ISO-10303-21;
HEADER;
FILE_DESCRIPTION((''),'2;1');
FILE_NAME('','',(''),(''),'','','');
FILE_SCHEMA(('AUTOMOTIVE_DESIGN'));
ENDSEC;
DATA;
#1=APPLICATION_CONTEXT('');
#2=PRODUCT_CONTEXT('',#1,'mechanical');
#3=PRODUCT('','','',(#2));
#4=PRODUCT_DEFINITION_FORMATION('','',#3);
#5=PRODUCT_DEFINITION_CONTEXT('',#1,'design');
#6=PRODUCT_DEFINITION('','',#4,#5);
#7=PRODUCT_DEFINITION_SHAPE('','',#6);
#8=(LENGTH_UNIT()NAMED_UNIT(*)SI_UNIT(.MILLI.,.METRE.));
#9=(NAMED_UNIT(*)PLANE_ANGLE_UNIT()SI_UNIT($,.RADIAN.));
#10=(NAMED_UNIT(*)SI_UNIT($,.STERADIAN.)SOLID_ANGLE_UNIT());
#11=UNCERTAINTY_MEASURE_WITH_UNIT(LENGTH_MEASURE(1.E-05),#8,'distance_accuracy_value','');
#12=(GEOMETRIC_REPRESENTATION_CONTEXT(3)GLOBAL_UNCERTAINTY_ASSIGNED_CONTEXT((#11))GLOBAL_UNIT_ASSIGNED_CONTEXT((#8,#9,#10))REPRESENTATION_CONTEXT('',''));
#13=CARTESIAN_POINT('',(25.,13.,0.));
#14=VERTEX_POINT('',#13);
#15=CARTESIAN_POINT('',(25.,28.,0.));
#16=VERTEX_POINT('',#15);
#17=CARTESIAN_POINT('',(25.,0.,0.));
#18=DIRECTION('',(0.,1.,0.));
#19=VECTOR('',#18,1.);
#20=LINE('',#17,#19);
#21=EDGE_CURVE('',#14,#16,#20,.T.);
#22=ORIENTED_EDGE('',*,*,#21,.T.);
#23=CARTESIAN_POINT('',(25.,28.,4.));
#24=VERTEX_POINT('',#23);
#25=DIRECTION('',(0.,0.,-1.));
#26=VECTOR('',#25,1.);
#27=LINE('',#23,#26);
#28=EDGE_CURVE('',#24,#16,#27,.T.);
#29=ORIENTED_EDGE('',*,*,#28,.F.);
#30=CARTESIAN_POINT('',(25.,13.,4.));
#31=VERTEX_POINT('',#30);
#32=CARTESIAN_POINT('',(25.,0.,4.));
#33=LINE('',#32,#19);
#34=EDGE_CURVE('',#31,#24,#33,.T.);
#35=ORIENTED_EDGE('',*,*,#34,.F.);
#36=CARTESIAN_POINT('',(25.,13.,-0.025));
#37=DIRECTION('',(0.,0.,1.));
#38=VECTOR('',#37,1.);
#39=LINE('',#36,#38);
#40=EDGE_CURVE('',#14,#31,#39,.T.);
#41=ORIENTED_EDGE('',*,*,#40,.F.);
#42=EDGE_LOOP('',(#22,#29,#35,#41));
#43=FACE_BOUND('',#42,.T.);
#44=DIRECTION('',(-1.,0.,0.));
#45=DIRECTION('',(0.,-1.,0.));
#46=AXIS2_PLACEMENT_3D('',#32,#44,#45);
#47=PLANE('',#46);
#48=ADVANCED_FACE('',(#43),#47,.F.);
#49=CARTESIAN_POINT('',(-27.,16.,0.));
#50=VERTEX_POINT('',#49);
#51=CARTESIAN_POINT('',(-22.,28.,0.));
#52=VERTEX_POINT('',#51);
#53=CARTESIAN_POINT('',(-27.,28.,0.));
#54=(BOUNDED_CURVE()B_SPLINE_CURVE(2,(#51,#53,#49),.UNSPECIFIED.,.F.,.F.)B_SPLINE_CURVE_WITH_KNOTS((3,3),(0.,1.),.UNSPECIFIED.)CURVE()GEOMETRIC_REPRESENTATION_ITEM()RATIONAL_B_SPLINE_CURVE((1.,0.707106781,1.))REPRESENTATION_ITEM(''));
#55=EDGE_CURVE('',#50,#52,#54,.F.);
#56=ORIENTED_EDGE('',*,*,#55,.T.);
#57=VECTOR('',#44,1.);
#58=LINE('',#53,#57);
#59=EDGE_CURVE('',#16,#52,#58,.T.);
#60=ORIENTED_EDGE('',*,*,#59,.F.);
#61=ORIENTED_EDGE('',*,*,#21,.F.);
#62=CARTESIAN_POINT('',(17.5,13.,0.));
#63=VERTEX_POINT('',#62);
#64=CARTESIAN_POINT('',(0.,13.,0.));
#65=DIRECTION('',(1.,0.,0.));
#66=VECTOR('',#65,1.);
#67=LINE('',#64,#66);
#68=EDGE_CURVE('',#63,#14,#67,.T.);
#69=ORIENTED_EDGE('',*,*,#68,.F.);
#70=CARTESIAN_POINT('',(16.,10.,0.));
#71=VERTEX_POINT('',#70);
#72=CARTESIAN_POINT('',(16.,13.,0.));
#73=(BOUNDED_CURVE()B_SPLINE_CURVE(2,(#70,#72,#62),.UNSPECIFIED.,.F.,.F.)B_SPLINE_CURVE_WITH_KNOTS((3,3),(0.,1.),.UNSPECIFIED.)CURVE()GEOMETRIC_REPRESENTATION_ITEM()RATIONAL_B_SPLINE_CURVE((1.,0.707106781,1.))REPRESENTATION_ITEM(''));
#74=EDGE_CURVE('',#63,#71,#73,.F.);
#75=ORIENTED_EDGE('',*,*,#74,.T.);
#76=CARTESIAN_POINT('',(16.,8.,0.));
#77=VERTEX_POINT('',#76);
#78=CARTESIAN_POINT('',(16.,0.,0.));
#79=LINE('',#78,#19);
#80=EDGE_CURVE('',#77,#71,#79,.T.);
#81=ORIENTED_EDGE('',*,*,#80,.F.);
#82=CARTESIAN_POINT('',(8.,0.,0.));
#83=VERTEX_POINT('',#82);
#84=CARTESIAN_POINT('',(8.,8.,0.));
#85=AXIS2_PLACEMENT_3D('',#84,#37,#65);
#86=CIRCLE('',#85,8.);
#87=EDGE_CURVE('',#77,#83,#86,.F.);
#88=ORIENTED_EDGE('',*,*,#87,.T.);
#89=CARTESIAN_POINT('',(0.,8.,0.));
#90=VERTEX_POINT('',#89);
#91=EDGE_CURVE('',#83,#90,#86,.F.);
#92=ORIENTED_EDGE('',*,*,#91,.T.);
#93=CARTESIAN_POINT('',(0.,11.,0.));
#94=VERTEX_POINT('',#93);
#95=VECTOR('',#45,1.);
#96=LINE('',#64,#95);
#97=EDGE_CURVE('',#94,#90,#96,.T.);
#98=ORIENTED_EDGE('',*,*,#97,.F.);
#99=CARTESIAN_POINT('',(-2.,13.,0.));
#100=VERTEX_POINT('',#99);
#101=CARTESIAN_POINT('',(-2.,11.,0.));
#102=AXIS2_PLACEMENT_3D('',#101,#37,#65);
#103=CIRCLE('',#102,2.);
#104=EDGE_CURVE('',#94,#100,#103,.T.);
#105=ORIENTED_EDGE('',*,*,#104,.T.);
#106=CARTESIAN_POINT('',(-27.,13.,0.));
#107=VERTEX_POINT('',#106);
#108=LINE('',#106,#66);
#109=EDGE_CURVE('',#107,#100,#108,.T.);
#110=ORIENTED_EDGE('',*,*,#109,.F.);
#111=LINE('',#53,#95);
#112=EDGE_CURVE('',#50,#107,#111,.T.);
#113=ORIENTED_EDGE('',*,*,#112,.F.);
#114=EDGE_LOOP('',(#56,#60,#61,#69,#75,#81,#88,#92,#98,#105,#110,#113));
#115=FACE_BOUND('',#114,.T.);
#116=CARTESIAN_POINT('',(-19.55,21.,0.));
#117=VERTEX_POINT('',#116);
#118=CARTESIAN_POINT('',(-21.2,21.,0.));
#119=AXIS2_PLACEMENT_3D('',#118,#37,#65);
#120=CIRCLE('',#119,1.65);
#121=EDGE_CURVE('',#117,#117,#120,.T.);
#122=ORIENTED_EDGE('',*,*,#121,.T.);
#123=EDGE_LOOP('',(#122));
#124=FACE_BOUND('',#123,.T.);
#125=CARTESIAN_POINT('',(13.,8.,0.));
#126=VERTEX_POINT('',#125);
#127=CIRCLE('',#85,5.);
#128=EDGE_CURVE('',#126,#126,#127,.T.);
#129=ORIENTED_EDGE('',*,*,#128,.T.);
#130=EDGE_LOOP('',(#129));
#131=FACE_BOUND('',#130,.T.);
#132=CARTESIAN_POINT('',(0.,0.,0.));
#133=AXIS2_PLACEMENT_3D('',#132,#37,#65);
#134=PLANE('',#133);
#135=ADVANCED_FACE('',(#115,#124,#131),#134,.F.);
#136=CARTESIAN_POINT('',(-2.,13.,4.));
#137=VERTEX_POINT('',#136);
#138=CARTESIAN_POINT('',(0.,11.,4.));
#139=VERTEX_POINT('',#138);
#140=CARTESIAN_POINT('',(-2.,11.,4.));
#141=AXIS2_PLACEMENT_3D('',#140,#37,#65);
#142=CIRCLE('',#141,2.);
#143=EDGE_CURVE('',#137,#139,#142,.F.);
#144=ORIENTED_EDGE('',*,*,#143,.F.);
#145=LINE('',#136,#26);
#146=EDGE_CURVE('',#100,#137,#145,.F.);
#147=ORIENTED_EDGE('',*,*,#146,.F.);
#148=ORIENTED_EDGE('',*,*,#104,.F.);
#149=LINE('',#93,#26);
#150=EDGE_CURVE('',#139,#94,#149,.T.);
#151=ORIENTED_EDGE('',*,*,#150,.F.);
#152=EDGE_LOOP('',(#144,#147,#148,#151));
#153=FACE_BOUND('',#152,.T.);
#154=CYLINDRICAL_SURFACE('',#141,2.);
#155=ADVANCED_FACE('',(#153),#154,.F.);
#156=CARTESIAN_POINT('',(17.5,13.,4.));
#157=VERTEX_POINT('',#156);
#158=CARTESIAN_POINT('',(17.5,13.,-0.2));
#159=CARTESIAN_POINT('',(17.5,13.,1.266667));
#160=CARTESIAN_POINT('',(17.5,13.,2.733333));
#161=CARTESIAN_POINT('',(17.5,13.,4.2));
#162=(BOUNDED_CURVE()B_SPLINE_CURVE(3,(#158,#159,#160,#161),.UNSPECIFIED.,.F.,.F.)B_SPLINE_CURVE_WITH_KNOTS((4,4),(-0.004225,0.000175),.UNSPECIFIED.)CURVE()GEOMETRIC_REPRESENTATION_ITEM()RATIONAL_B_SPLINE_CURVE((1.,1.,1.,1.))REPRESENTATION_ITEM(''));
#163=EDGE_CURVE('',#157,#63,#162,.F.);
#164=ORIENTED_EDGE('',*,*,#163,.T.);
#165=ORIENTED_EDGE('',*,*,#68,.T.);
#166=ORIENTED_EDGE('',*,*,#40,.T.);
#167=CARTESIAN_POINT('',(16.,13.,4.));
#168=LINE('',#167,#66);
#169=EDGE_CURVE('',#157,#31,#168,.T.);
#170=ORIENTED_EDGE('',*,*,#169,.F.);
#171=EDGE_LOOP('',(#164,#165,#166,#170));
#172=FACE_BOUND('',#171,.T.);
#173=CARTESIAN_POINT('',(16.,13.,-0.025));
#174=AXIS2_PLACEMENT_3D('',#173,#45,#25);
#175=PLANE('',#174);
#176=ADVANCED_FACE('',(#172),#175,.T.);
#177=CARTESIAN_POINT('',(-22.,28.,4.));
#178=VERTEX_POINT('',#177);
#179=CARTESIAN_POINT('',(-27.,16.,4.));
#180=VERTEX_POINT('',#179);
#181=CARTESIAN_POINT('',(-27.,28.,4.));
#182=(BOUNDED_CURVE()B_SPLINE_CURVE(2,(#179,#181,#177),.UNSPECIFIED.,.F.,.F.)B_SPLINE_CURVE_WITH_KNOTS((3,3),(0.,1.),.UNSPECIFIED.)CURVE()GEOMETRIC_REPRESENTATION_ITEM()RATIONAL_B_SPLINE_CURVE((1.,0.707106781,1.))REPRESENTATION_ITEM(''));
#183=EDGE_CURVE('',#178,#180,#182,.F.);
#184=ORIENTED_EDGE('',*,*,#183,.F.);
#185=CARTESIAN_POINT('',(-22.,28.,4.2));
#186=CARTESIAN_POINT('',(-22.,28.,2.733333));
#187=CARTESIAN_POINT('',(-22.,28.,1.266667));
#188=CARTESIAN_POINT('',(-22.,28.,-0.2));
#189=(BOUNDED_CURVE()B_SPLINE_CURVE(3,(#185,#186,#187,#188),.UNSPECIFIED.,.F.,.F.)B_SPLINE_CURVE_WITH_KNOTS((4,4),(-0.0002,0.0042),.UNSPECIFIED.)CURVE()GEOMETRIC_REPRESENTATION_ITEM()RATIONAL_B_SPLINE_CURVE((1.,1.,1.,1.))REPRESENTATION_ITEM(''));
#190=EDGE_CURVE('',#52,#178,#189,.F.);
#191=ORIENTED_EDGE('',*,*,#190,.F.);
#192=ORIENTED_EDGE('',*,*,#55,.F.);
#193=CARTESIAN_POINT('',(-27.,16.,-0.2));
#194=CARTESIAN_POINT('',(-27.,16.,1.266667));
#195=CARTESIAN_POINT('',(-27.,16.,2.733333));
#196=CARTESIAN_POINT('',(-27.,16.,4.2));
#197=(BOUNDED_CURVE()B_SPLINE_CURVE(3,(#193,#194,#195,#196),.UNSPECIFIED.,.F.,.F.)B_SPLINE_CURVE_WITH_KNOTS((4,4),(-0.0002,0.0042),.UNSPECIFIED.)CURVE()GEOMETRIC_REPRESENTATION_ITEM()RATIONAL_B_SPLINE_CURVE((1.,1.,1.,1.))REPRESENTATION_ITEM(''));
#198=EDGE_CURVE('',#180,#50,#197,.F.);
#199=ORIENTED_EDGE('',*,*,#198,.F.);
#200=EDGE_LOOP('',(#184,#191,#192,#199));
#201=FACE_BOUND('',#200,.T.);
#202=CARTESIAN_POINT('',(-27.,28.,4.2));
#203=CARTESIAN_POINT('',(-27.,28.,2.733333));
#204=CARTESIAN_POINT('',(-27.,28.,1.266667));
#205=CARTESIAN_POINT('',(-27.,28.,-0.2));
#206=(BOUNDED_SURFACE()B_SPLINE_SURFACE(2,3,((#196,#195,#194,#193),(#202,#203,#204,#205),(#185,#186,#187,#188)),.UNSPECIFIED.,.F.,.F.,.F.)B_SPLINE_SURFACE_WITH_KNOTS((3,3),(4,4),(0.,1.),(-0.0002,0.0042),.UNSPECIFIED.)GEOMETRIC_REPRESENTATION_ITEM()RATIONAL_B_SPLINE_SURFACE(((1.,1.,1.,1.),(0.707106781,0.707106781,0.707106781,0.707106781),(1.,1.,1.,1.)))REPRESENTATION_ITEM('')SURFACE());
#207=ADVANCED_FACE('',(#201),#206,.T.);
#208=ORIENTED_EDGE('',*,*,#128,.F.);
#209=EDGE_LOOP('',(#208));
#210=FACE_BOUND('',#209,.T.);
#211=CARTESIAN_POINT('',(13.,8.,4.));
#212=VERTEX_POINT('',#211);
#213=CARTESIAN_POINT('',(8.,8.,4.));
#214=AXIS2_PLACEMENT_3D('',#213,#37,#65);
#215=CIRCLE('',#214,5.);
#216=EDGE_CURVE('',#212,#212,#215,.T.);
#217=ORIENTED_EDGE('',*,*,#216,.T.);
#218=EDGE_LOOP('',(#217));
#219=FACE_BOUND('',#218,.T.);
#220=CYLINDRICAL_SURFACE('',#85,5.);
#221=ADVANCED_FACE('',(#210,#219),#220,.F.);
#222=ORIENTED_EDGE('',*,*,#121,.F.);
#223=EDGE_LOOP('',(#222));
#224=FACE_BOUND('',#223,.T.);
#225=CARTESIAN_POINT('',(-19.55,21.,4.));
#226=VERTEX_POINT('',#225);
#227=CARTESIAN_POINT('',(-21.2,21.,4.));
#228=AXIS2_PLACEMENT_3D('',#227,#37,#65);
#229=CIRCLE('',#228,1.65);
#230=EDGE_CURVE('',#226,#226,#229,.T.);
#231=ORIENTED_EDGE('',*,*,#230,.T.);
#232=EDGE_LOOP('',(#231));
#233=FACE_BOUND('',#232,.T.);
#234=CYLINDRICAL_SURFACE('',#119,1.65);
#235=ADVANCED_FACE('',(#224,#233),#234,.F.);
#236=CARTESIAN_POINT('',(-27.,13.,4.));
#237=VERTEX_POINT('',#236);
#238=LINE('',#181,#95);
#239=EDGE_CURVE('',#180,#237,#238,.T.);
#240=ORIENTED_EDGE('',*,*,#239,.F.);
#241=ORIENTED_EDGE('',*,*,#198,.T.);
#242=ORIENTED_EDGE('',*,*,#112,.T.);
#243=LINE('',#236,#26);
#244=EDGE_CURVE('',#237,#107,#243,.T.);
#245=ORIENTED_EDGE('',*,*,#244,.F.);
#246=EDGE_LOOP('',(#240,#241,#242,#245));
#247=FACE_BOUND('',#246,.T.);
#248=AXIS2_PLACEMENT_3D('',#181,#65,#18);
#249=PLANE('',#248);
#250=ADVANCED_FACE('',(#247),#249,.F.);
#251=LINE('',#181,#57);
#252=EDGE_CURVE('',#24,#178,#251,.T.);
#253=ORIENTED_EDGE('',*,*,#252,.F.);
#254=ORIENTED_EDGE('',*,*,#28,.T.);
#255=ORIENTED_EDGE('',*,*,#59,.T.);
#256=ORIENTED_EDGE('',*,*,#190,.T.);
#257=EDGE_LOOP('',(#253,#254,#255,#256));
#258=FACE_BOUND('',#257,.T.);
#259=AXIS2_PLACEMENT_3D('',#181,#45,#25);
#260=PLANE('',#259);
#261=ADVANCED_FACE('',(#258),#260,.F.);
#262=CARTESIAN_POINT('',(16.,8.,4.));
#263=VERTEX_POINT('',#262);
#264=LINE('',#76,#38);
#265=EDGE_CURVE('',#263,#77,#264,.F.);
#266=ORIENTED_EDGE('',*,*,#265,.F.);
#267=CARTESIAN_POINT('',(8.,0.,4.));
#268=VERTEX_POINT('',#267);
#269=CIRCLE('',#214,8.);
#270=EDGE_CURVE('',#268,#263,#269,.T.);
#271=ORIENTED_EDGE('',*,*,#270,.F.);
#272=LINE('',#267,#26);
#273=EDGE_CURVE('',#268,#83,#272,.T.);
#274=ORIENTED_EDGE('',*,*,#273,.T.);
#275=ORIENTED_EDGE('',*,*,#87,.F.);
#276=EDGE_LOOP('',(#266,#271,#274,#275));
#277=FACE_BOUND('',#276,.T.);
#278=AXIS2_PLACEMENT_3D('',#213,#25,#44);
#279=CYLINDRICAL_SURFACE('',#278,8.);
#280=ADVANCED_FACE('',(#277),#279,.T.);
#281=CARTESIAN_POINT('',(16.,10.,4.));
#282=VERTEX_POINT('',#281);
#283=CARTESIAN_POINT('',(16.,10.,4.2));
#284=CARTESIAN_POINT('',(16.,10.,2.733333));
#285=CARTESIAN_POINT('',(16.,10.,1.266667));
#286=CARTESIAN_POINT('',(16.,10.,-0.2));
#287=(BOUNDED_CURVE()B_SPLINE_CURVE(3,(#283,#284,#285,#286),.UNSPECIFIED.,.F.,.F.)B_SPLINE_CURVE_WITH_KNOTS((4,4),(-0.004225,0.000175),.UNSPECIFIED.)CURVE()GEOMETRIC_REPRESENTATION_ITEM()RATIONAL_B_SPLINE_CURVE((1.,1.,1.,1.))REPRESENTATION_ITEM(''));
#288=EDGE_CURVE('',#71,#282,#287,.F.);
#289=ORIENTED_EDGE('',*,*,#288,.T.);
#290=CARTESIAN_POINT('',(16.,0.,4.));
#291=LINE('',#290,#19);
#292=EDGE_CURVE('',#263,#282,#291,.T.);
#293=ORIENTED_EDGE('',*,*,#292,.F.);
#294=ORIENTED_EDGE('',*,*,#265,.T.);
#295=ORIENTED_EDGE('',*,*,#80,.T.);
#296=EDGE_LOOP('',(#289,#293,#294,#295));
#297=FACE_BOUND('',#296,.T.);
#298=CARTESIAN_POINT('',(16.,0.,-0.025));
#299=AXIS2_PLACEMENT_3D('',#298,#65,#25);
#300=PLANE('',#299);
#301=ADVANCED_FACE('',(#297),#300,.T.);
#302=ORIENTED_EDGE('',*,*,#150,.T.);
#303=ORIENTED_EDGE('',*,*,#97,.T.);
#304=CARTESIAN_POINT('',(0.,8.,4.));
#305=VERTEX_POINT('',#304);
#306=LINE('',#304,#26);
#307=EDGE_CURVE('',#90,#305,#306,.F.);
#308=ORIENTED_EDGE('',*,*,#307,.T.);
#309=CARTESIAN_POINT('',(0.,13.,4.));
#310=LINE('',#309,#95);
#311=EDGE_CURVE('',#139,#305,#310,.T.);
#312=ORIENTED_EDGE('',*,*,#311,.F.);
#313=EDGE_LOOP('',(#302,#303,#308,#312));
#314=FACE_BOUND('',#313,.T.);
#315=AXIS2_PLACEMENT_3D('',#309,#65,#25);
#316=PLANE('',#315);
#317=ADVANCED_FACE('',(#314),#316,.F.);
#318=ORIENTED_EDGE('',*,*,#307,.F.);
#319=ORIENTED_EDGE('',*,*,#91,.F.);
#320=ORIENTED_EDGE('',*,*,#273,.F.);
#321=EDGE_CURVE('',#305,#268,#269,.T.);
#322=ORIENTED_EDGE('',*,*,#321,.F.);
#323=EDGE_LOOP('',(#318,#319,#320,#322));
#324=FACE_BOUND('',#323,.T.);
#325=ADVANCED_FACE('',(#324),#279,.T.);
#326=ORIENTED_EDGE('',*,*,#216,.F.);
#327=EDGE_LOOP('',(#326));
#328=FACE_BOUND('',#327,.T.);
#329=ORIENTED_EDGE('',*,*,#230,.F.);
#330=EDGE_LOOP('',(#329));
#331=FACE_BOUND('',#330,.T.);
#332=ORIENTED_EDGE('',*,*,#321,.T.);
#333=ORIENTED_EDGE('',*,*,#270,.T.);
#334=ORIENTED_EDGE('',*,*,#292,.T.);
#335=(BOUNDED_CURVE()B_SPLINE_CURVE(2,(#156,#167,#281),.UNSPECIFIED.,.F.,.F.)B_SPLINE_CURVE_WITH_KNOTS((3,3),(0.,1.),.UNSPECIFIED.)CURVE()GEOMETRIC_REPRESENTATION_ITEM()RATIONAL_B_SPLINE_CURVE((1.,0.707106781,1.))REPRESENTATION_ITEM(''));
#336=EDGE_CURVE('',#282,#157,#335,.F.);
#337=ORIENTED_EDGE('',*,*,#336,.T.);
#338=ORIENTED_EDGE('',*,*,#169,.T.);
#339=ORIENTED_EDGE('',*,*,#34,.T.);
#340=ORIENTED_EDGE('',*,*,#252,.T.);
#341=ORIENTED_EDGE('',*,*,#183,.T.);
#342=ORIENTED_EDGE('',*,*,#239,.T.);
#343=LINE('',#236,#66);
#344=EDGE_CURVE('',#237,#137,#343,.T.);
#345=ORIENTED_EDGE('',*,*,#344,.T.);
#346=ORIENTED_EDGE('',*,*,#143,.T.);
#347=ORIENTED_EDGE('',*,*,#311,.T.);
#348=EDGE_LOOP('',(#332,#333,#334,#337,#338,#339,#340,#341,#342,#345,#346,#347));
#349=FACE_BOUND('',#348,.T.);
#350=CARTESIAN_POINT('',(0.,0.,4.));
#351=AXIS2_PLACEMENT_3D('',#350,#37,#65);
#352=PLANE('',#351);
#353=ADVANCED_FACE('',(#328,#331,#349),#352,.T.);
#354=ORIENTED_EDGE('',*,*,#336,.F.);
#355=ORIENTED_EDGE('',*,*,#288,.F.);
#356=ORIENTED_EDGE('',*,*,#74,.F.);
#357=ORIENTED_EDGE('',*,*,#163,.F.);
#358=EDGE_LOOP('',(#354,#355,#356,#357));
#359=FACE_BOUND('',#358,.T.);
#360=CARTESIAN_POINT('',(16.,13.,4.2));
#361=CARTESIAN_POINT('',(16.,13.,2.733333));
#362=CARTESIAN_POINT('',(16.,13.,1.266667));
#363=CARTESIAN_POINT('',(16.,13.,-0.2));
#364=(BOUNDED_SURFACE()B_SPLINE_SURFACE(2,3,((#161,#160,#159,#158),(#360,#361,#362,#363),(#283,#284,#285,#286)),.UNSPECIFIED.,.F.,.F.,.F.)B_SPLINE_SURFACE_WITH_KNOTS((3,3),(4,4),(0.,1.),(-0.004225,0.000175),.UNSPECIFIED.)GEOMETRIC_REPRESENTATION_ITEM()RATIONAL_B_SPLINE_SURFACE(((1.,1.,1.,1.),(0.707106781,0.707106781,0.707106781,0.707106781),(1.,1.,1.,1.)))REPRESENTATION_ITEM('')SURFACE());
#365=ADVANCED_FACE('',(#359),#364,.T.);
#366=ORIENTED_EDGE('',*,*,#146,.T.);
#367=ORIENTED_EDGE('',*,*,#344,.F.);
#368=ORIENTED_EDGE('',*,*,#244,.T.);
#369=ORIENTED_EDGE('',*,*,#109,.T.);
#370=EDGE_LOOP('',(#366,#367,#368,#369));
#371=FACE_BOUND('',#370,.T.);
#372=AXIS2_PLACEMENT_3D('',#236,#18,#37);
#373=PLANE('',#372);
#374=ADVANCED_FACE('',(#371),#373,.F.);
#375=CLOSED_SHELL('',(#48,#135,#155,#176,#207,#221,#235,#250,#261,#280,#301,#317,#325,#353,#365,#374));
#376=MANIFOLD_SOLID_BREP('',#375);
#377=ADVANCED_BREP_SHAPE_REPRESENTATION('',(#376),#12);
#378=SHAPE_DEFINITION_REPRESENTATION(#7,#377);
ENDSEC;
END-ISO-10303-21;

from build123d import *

# Parameters (mm, degrees)
RESSALTO_EXTRUS_O1_DEPTH = 4
FILETE3_R                = 8
ESBO_O2_R                = 1.65
ESBO_O2_R_2              = 5
CORTE_EXTRUS_O1_DEPTH    = 40.102429592
FILETE12_SIZE            = 5
FILETE12_SIZE_2          = 12
FILETE14_R               = 2
ESBO_O3_W                = 9
ESBO_O3_H                = 13
CORTE_EXTRUS_O2_DEPTH    = 40.102429743
FILETE15_R               = 8
FILETE16_SIZE            = 3
FILETE16_SIZE_2          = 1.5


# Some blends are built 0.0001 mm under size
with BuildPart() as part:
    # Esboço1 → Ressalto-extrusão1 (new body)
    with BuildSketch(Plane.XY):
        Polygon((0, 0), (25, 0), (25, 28), (-27, 28), (-27, 13), (0, 13), align=None)
    extrude(amount=RESSALTO_EXTRUS_O1_DEPTH)

    # Filete3
    filete3_edges = [part.edges().sort_by_distance(p)[0] for p in [
        (0, 0, 2),
    ]]
    fillet(filete3_edges, radius=FILETE3_R)

    # Esboço2 → Corte-extrusão1 (cut, through all)
    with BuildSketch(Plane.XY.offset(4)):
        with Locations((-21.2, 21)):
            Circle(ESBO_O2_R)
        with Locations((8, 8)):
            Circle(ESBO_O2_R_2)
    extrude(amount=-CORTE_EXTRUS_O1_DEPTH, mode=Mode.SUBTRACT)

    # Filete12
    # an asymmetric fillet: 12, 5 mm, written as the material it takes off along each edge
    with BuildSketch(Plane(origin=(-27, 28, -30), x_dir=(1, 0, 0), z_dir=(0, 0, 1))) as filete12_piece_1:
        with BuildLine():
            Bezier((FILETE12_SIZE, 0), (0, 0), (0, -FILETE12_SIZE_2), weights=[1, 0.707106781, 1])
            Line((0, -FILETE12_SIZE_2), (0, 0))
            Line((0, 0), (FILETE12_SIZE, 0))
        make_face()
    extrude(amount=64, mode=Mode.SUBTRACT)

    # Filete14
    filete14_edges = [part.edges().sort_by_distance(p)[0] for p in [
        (0, 13, 2),
    ]]
    fillet(filete14_edges, radius=FILETE14_R)

    # Esboço3 → Corte-extrusão2 (cut, through all)
    with BuildSketch(Plane.XY.offset(4)):
        with Locations((20.5, 6.5)):
            Rectangle(ESBO_O3_W, ESBO_O3_H)
    extrude(amount=-CORTE_EXTRUS_O2_DEPTH, mode=Mode.SUBTRACT)

    # Filete15
    filete15_edges = [part.edges().sort_by_distance(p)[0] for p in [
        (16, 0, 2),
    ]]
    fillet(filete15_edges, radius=FILETE15_R - 0.0001)  # a hair under: the kernel refuses the full size

    # Filete16
    # an asymmetric fillet: 3, 1.5 mm, written as the material it adds along each edge
    with BuildSketch(Plane(origin=(16, 13, 4), x_dir=(0, -1, 0), z_dir=(0, 0, -1))) as filete16_piece_1:
        with BuildLine():
            Bezier((FILETE16_SIZE, 0), (0, 0), (0, -FILETE16_SIZE_2), weights=[1, 0.707106781, 1])
            Line((0, -FILETE16_SIZE_2), (0, 0))
            Line((0, 0), (FILETE16_SIZE, 0))
        make_face()
    extrude(amount=4)


solid = part.part
